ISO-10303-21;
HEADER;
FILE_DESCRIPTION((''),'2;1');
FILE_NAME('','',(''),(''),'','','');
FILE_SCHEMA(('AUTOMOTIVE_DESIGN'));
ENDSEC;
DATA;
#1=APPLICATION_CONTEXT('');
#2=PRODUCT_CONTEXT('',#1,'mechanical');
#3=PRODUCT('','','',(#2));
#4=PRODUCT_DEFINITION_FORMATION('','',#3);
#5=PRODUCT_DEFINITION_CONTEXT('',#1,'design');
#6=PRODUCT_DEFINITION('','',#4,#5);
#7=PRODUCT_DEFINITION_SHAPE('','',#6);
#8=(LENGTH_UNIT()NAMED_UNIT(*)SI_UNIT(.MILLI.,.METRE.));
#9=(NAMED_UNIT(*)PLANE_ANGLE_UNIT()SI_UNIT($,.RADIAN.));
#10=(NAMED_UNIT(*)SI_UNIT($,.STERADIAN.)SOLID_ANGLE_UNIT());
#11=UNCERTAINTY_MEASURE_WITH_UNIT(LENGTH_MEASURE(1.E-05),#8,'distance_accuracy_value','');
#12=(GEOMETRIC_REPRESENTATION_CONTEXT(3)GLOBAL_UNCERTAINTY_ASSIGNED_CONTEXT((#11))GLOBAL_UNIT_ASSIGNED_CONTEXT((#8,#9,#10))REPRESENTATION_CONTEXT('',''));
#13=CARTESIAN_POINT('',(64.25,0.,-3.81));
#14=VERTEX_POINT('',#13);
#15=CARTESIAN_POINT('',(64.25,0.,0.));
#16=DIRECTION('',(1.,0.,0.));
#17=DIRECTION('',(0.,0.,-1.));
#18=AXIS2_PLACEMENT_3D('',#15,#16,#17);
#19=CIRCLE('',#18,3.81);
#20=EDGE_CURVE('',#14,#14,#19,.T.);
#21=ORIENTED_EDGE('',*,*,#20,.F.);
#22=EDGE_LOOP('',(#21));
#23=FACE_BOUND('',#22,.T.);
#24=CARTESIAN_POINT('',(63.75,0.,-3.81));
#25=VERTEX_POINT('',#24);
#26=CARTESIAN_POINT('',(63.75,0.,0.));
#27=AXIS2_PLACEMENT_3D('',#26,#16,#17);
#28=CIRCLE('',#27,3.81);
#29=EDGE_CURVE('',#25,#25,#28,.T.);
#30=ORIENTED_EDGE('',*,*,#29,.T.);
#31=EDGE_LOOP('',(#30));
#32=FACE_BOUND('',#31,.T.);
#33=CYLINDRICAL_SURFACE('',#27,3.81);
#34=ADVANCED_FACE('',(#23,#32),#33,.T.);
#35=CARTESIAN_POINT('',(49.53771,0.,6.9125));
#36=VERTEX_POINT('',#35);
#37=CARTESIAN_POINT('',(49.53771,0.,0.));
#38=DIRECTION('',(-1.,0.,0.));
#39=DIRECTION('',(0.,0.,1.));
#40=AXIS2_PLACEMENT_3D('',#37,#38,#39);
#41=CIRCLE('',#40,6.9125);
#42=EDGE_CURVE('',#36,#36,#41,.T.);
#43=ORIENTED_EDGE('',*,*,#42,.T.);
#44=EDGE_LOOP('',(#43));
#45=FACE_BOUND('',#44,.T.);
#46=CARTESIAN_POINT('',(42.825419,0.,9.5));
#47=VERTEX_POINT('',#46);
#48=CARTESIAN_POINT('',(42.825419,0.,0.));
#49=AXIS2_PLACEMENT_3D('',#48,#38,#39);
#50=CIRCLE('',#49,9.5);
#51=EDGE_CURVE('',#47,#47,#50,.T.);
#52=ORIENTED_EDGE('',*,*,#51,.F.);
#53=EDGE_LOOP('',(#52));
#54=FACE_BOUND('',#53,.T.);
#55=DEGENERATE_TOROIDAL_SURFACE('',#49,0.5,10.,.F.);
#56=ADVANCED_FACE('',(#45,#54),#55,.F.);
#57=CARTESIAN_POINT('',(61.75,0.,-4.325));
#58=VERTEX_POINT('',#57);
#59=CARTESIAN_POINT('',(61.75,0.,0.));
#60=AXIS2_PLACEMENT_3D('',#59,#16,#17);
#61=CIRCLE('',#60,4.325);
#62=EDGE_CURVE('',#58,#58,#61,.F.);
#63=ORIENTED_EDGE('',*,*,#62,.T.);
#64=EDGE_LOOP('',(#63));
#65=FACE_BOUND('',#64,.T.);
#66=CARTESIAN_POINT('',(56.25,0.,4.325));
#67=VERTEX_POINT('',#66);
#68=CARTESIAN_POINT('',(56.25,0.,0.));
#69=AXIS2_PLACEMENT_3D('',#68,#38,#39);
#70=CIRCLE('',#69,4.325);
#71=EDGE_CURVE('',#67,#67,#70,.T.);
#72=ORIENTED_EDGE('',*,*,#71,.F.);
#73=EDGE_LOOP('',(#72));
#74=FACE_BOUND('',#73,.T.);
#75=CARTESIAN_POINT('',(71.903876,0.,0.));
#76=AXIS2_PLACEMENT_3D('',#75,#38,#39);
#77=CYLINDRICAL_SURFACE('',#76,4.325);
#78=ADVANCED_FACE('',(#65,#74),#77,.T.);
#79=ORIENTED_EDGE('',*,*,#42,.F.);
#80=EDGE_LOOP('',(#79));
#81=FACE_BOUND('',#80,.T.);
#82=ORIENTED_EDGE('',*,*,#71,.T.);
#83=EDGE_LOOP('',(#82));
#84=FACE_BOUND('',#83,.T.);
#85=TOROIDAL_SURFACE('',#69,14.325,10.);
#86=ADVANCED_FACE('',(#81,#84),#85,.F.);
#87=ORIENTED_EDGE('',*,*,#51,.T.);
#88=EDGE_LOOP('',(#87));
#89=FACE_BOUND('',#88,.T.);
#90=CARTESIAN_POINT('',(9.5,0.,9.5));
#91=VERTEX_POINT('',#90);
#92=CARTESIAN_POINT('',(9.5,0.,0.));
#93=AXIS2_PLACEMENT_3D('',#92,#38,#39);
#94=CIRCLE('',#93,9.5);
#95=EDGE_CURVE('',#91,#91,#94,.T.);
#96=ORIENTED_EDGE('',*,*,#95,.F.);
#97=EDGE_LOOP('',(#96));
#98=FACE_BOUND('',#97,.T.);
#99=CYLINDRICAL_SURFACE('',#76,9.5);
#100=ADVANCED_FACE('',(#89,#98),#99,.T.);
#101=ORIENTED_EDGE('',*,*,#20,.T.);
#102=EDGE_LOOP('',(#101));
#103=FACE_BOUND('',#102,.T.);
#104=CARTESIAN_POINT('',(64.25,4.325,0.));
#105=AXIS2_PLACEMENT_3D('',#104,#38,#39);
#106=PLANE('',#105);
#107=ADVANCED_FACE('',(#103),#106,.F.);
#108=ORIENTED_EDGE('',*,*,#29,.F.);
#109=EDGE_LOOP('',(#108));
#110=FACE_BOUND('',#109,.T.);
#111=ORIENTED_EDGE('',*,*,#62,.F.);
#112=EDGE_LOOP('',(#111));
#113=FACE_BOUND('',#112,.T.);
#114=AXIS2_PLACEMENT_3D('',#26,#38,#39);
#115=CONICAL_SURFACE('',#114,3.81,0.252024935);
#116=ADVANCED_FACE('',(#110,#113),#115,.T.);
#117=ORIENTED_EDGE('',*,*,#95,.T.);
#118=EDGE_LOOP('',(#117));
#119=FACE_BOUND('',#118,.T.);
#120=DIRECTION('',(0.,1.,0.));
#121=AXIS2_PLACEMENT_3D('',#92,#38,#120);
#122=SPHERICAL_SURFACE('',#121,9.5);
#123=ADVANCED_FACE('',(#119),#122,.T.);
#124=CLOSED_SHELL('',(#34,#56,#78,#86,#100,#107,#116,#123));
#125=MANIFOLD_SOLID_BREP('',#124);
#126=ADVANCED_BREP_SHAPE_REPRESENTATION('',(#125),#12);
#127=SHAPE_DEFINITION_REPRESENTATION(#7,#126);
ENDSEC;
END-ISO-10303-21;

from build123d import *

# Parameters (mm, degrees)
SKETCH2_OUTSIDE_W  = 34.928
SKETCH2_OUTSIDE_H  = 34.928
SKETCH2_OUTSIDE_R  = 3.81
CUT_EXTRUDE1_DEPTH = 0.5
CHAMFER1_SIZE2     = 2
CHAMFER1_SIZE      = 0.515


with BuildPart() as part:
    # Sketch1 → Revolve1 (revolve)
    with BuildSketch(Plane.XY, mode=Mode.PRIVATE) as revolve1_sk:
        with BuildLine():
            Line((0, 0), (64.25, 0))
            Line((64.25, 0), (64.25, 4.325))
            Line((64.25, 4.325), (56.25, 4.325))
            ThreePointArc((56.25, 4.325), (52.653126358, 4.994271197), (49.5377095, 6.9125))
            ThreePointArc((49.5377095, 6.9125), (46.422292643, 8.830728803), (42.825419001, 9.5))
            Line((42.825419001, 9.5), (9.5, 9.5))
            ThreePointArc((9.5, 9.5), (2.782485579, 6.717514421), (0, 0))
        make_face()
    revolve(revolve1_sk.sketch.rotate(Axis((71.903875566, 0, 0), (1, 0, 0)), 90), axis=Axis((71.903875566, 0, 0), (1, 0, 0)))

    # Sketch2 outside → Cut-Extrude1 (cut)
    with BuildSketch(Plane(origin=(64.25, 0, 0), x_dir=(0, 0, -1), z_dir=(1, 0, 0))):
        Rectangle(SKETCH2_OUTSIDE_W, SKETCH2_OUTSIDE_H)
        Circle(SKETCH2_OUTSIDE_R, mode=Mode.SUBTRACT)
    extrude(amount=-CUT_EXTRUDE1_DEPTH, mode=Mode.SUBTRACT)

    # Chamfer1
    chamfer1_edges = [part.edges().sort_by_distance(p)[0] for p in [
        (63.75, 0, -4.325),
    ]]
    chamfer1_side = [part.faces().sort_by_distance(p)[0] for p in [
        (63.75, 0, -4.3147),
    ]]
    chamfer(chamfer1_edges, length=CHAMFER1_SIZE - 0.0001, length2=CHAMFER1_SIZE2 - 0.0001, reference=chamfer1_side[0])  # a hair under: the kernel refuses the full size


solid = part.part
